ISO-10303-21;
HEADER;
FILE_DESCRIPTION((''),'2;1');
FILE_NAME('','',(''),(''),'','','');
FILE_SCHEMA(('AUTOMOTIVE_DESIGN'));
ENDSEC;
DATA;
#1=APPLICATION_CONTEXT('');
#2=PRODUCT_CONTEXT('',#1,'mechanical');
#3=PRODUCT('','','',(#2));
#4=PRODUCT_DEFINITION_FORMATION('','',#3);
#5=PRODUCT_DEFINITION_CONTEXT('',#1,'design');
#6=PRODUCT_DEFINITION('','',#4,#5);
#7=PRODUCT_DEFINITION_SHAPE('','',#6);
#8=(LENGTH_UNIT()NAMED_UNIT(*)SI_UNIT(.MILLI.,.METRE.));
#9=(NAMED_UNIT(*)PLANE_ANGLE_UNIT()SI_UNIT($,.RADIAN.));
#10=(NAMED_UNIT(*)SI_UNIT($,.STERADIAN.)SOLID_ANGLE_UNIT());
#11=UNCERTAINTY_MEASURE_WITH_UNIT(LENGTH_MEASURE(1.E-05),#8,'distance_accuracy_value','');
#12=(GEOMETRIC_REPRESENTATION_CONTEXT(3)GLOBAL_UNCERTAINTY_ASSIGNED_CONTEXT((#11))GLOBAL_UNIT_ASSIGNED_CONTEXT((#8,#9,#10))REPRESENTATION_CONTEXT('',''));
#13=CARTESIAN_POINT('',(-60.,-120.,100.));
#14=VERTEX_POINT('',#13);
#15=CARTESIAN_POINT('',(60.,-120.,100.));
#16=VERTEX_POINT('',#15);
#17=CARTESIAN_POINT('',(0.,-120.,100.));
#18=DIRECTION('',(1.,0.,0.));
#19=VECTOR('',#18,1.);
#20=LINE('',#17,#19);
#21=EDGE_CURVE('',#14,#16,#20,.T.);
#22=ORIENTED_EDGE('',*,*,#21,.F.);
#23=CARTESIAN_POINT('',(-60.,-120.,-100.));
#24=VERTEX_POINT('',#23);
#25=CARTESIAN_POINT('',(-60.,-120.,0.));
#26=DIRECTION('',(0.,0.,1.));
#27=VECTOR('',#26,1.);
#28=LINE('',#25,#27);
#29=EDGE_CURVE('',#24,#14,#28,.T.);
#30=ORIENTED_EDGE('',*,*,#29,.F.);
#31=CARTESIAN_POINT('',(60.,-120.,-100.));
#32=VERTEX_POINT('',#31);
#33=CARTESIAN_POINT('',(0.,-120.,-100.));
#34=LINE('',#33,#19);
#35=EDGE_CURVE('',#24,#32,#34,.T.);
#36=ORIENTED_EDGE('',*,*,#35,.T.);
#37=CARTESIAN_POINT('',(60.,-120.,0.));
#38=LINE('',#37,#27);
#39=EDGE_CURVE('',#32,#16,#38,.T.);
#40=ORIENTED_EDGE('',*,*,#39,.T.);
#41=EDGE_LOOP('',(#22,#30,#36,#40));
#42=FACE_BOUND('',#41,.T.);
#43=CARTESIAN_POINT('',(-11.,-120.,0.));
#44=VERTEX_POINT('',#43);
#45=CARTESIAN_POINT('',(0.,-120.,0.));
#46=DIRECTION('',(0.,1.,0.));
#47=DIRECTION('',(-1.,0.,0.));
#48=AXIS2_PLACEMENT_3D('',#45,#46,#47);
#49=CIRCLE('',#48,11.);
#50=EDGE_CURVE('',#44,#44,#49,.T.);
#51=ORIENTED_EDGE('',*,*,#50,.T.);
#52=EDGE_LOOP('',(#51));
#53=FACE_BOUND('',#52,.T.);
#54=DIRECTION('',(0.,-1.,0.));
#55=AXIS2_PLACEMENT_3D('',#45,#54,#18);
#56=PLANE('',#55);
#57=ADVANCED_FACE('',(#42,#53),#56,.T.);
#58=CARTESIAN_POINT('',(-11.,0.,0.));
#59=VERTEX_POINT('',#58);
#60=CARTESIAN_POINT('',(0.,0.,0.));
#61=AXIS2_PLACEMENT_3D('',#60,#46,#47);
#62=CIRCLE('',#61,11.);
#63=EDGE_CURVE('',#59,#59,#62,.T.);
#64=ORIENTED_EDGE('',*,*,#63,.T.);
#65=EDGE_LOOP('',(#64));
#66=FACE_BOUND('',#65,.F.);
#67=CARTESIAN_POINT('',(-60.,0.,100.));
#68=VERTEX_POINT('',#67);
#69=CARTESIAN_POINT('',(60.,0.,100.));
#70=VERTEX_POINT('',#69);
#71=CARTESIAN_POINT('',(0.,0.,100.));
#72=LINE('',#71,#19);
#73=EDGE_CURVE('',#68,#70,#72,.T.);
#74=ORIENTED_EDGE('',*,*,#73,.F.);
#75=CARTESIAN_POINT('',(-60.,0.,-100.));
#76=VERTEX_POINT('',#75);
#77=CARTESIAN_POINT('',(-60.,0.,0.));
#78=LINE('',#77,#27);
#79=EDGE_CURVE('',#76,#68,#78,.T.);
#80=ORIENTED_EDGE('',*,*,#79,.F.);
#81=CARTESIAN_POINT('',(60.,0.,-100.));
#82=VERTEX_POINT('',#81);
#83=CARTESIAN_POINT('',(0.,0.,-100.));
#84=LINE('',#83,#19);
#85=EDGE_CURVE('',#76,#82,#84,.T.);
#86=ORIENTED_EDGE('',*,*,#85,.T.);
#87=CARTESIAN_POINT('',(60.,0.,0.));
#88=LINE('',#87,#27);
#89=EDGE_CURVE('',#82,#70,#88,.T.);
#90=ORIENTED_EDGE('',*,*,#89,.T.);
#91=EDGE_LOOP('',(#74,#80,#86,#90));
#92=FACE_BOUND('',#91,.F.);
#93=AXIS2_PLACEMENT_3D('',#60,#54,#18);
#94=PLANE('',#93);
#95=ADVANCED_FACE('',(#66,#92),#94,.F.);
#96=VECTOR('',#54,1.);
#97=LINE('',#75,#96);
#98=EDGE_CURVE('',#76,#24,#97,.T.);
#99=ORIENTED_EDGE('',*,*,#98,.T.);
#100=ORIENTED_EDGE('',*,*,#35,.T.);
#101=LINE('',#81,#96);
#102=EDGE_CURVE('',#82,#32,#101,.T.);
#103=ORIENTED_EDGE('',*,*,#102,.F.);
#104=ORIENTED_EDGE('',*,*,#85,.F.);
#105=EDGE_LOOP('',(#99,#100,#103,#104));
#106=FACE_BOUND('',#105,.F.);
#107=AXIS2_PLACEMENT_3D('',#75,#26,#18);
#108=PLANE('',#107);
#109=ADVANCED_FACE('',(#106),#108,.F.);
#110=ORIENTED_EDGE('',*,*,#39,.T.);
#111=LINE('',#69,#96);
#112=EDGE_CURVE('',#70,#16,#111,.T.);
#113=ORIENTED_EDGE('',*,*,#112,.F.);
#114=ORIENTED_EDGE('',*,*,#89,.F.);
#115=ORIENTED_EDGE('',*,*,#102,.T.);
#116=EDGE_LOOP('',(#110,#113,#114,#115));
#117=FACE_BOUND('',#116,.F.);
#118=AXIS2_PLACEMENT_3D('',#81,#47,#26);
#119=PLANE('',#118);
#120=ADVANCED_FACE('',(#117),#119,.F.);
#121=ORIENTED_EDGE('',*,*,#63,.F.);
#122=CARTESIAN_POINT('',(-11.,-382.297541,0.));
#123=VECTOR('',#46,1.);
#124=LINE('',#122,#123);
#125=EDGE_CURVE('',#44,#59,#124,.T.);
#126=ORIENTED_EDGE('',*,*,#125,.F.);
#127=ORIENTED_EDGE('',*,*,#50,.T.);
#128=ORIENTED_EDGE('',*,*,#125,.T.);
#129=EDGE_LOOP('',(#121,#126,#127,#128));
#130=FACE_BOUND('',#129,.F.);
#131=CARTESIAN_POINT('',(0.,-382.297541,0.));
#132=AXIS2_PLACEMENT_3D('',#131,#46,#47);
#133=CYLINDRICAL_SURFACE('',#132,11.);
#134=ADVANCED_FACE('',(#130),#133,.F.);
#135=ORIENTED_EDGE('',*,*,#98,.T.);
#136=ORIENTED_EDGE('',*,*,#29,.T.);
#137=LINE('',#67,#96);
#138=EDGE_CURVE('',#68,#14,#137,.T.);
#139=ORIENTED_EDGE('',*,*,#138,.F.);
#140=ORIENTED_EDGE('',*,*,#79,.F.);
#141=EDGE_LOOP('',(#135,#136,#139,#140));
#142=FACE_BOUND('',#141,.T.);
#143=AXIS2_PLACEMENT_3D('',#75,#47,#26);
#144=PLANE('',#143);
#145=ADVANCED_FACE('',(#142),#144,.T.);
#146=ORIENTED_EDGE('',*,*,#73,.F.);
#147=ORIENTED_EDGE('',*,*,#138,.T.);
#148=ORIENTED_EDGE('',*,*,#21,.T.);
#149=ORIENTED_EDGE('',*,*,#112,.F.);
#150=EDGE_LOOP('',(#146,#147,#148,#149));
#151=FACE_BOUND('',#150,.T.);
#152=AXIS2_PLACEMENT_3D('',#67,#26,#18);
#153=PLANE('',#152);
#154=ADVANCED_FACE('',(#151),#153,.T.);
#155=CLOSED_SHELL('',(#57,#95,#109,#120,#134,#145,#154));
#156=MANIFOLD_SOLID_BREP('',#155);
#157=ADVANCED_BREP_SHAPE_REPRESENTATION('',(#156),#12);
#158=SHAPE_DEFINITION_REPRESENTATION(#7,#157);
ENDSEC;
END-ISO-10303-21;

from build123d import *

# Parameters (mm, degrees)
F0_W     = 120
F0_H     = 200
F1_DEPTH = 120
F3_D     = 22


# Not quite as in the source:
# - a feature names something its author has since deleted; it is built from what else it names


with BuildPart() as f1:
    # F0 (on Front) → F1 (new body)
    with BuildSketch(Plane.XZ):
        Rectangle(F0_W, F0_H)
    extrude(amount=F1_DEPTH)

    # F3 (through all)
    with Locations(Plane.XZ.offset(120)):
        with Locations((0, 0)):
            Hole(F3_D / 2)


solid = f1.part
